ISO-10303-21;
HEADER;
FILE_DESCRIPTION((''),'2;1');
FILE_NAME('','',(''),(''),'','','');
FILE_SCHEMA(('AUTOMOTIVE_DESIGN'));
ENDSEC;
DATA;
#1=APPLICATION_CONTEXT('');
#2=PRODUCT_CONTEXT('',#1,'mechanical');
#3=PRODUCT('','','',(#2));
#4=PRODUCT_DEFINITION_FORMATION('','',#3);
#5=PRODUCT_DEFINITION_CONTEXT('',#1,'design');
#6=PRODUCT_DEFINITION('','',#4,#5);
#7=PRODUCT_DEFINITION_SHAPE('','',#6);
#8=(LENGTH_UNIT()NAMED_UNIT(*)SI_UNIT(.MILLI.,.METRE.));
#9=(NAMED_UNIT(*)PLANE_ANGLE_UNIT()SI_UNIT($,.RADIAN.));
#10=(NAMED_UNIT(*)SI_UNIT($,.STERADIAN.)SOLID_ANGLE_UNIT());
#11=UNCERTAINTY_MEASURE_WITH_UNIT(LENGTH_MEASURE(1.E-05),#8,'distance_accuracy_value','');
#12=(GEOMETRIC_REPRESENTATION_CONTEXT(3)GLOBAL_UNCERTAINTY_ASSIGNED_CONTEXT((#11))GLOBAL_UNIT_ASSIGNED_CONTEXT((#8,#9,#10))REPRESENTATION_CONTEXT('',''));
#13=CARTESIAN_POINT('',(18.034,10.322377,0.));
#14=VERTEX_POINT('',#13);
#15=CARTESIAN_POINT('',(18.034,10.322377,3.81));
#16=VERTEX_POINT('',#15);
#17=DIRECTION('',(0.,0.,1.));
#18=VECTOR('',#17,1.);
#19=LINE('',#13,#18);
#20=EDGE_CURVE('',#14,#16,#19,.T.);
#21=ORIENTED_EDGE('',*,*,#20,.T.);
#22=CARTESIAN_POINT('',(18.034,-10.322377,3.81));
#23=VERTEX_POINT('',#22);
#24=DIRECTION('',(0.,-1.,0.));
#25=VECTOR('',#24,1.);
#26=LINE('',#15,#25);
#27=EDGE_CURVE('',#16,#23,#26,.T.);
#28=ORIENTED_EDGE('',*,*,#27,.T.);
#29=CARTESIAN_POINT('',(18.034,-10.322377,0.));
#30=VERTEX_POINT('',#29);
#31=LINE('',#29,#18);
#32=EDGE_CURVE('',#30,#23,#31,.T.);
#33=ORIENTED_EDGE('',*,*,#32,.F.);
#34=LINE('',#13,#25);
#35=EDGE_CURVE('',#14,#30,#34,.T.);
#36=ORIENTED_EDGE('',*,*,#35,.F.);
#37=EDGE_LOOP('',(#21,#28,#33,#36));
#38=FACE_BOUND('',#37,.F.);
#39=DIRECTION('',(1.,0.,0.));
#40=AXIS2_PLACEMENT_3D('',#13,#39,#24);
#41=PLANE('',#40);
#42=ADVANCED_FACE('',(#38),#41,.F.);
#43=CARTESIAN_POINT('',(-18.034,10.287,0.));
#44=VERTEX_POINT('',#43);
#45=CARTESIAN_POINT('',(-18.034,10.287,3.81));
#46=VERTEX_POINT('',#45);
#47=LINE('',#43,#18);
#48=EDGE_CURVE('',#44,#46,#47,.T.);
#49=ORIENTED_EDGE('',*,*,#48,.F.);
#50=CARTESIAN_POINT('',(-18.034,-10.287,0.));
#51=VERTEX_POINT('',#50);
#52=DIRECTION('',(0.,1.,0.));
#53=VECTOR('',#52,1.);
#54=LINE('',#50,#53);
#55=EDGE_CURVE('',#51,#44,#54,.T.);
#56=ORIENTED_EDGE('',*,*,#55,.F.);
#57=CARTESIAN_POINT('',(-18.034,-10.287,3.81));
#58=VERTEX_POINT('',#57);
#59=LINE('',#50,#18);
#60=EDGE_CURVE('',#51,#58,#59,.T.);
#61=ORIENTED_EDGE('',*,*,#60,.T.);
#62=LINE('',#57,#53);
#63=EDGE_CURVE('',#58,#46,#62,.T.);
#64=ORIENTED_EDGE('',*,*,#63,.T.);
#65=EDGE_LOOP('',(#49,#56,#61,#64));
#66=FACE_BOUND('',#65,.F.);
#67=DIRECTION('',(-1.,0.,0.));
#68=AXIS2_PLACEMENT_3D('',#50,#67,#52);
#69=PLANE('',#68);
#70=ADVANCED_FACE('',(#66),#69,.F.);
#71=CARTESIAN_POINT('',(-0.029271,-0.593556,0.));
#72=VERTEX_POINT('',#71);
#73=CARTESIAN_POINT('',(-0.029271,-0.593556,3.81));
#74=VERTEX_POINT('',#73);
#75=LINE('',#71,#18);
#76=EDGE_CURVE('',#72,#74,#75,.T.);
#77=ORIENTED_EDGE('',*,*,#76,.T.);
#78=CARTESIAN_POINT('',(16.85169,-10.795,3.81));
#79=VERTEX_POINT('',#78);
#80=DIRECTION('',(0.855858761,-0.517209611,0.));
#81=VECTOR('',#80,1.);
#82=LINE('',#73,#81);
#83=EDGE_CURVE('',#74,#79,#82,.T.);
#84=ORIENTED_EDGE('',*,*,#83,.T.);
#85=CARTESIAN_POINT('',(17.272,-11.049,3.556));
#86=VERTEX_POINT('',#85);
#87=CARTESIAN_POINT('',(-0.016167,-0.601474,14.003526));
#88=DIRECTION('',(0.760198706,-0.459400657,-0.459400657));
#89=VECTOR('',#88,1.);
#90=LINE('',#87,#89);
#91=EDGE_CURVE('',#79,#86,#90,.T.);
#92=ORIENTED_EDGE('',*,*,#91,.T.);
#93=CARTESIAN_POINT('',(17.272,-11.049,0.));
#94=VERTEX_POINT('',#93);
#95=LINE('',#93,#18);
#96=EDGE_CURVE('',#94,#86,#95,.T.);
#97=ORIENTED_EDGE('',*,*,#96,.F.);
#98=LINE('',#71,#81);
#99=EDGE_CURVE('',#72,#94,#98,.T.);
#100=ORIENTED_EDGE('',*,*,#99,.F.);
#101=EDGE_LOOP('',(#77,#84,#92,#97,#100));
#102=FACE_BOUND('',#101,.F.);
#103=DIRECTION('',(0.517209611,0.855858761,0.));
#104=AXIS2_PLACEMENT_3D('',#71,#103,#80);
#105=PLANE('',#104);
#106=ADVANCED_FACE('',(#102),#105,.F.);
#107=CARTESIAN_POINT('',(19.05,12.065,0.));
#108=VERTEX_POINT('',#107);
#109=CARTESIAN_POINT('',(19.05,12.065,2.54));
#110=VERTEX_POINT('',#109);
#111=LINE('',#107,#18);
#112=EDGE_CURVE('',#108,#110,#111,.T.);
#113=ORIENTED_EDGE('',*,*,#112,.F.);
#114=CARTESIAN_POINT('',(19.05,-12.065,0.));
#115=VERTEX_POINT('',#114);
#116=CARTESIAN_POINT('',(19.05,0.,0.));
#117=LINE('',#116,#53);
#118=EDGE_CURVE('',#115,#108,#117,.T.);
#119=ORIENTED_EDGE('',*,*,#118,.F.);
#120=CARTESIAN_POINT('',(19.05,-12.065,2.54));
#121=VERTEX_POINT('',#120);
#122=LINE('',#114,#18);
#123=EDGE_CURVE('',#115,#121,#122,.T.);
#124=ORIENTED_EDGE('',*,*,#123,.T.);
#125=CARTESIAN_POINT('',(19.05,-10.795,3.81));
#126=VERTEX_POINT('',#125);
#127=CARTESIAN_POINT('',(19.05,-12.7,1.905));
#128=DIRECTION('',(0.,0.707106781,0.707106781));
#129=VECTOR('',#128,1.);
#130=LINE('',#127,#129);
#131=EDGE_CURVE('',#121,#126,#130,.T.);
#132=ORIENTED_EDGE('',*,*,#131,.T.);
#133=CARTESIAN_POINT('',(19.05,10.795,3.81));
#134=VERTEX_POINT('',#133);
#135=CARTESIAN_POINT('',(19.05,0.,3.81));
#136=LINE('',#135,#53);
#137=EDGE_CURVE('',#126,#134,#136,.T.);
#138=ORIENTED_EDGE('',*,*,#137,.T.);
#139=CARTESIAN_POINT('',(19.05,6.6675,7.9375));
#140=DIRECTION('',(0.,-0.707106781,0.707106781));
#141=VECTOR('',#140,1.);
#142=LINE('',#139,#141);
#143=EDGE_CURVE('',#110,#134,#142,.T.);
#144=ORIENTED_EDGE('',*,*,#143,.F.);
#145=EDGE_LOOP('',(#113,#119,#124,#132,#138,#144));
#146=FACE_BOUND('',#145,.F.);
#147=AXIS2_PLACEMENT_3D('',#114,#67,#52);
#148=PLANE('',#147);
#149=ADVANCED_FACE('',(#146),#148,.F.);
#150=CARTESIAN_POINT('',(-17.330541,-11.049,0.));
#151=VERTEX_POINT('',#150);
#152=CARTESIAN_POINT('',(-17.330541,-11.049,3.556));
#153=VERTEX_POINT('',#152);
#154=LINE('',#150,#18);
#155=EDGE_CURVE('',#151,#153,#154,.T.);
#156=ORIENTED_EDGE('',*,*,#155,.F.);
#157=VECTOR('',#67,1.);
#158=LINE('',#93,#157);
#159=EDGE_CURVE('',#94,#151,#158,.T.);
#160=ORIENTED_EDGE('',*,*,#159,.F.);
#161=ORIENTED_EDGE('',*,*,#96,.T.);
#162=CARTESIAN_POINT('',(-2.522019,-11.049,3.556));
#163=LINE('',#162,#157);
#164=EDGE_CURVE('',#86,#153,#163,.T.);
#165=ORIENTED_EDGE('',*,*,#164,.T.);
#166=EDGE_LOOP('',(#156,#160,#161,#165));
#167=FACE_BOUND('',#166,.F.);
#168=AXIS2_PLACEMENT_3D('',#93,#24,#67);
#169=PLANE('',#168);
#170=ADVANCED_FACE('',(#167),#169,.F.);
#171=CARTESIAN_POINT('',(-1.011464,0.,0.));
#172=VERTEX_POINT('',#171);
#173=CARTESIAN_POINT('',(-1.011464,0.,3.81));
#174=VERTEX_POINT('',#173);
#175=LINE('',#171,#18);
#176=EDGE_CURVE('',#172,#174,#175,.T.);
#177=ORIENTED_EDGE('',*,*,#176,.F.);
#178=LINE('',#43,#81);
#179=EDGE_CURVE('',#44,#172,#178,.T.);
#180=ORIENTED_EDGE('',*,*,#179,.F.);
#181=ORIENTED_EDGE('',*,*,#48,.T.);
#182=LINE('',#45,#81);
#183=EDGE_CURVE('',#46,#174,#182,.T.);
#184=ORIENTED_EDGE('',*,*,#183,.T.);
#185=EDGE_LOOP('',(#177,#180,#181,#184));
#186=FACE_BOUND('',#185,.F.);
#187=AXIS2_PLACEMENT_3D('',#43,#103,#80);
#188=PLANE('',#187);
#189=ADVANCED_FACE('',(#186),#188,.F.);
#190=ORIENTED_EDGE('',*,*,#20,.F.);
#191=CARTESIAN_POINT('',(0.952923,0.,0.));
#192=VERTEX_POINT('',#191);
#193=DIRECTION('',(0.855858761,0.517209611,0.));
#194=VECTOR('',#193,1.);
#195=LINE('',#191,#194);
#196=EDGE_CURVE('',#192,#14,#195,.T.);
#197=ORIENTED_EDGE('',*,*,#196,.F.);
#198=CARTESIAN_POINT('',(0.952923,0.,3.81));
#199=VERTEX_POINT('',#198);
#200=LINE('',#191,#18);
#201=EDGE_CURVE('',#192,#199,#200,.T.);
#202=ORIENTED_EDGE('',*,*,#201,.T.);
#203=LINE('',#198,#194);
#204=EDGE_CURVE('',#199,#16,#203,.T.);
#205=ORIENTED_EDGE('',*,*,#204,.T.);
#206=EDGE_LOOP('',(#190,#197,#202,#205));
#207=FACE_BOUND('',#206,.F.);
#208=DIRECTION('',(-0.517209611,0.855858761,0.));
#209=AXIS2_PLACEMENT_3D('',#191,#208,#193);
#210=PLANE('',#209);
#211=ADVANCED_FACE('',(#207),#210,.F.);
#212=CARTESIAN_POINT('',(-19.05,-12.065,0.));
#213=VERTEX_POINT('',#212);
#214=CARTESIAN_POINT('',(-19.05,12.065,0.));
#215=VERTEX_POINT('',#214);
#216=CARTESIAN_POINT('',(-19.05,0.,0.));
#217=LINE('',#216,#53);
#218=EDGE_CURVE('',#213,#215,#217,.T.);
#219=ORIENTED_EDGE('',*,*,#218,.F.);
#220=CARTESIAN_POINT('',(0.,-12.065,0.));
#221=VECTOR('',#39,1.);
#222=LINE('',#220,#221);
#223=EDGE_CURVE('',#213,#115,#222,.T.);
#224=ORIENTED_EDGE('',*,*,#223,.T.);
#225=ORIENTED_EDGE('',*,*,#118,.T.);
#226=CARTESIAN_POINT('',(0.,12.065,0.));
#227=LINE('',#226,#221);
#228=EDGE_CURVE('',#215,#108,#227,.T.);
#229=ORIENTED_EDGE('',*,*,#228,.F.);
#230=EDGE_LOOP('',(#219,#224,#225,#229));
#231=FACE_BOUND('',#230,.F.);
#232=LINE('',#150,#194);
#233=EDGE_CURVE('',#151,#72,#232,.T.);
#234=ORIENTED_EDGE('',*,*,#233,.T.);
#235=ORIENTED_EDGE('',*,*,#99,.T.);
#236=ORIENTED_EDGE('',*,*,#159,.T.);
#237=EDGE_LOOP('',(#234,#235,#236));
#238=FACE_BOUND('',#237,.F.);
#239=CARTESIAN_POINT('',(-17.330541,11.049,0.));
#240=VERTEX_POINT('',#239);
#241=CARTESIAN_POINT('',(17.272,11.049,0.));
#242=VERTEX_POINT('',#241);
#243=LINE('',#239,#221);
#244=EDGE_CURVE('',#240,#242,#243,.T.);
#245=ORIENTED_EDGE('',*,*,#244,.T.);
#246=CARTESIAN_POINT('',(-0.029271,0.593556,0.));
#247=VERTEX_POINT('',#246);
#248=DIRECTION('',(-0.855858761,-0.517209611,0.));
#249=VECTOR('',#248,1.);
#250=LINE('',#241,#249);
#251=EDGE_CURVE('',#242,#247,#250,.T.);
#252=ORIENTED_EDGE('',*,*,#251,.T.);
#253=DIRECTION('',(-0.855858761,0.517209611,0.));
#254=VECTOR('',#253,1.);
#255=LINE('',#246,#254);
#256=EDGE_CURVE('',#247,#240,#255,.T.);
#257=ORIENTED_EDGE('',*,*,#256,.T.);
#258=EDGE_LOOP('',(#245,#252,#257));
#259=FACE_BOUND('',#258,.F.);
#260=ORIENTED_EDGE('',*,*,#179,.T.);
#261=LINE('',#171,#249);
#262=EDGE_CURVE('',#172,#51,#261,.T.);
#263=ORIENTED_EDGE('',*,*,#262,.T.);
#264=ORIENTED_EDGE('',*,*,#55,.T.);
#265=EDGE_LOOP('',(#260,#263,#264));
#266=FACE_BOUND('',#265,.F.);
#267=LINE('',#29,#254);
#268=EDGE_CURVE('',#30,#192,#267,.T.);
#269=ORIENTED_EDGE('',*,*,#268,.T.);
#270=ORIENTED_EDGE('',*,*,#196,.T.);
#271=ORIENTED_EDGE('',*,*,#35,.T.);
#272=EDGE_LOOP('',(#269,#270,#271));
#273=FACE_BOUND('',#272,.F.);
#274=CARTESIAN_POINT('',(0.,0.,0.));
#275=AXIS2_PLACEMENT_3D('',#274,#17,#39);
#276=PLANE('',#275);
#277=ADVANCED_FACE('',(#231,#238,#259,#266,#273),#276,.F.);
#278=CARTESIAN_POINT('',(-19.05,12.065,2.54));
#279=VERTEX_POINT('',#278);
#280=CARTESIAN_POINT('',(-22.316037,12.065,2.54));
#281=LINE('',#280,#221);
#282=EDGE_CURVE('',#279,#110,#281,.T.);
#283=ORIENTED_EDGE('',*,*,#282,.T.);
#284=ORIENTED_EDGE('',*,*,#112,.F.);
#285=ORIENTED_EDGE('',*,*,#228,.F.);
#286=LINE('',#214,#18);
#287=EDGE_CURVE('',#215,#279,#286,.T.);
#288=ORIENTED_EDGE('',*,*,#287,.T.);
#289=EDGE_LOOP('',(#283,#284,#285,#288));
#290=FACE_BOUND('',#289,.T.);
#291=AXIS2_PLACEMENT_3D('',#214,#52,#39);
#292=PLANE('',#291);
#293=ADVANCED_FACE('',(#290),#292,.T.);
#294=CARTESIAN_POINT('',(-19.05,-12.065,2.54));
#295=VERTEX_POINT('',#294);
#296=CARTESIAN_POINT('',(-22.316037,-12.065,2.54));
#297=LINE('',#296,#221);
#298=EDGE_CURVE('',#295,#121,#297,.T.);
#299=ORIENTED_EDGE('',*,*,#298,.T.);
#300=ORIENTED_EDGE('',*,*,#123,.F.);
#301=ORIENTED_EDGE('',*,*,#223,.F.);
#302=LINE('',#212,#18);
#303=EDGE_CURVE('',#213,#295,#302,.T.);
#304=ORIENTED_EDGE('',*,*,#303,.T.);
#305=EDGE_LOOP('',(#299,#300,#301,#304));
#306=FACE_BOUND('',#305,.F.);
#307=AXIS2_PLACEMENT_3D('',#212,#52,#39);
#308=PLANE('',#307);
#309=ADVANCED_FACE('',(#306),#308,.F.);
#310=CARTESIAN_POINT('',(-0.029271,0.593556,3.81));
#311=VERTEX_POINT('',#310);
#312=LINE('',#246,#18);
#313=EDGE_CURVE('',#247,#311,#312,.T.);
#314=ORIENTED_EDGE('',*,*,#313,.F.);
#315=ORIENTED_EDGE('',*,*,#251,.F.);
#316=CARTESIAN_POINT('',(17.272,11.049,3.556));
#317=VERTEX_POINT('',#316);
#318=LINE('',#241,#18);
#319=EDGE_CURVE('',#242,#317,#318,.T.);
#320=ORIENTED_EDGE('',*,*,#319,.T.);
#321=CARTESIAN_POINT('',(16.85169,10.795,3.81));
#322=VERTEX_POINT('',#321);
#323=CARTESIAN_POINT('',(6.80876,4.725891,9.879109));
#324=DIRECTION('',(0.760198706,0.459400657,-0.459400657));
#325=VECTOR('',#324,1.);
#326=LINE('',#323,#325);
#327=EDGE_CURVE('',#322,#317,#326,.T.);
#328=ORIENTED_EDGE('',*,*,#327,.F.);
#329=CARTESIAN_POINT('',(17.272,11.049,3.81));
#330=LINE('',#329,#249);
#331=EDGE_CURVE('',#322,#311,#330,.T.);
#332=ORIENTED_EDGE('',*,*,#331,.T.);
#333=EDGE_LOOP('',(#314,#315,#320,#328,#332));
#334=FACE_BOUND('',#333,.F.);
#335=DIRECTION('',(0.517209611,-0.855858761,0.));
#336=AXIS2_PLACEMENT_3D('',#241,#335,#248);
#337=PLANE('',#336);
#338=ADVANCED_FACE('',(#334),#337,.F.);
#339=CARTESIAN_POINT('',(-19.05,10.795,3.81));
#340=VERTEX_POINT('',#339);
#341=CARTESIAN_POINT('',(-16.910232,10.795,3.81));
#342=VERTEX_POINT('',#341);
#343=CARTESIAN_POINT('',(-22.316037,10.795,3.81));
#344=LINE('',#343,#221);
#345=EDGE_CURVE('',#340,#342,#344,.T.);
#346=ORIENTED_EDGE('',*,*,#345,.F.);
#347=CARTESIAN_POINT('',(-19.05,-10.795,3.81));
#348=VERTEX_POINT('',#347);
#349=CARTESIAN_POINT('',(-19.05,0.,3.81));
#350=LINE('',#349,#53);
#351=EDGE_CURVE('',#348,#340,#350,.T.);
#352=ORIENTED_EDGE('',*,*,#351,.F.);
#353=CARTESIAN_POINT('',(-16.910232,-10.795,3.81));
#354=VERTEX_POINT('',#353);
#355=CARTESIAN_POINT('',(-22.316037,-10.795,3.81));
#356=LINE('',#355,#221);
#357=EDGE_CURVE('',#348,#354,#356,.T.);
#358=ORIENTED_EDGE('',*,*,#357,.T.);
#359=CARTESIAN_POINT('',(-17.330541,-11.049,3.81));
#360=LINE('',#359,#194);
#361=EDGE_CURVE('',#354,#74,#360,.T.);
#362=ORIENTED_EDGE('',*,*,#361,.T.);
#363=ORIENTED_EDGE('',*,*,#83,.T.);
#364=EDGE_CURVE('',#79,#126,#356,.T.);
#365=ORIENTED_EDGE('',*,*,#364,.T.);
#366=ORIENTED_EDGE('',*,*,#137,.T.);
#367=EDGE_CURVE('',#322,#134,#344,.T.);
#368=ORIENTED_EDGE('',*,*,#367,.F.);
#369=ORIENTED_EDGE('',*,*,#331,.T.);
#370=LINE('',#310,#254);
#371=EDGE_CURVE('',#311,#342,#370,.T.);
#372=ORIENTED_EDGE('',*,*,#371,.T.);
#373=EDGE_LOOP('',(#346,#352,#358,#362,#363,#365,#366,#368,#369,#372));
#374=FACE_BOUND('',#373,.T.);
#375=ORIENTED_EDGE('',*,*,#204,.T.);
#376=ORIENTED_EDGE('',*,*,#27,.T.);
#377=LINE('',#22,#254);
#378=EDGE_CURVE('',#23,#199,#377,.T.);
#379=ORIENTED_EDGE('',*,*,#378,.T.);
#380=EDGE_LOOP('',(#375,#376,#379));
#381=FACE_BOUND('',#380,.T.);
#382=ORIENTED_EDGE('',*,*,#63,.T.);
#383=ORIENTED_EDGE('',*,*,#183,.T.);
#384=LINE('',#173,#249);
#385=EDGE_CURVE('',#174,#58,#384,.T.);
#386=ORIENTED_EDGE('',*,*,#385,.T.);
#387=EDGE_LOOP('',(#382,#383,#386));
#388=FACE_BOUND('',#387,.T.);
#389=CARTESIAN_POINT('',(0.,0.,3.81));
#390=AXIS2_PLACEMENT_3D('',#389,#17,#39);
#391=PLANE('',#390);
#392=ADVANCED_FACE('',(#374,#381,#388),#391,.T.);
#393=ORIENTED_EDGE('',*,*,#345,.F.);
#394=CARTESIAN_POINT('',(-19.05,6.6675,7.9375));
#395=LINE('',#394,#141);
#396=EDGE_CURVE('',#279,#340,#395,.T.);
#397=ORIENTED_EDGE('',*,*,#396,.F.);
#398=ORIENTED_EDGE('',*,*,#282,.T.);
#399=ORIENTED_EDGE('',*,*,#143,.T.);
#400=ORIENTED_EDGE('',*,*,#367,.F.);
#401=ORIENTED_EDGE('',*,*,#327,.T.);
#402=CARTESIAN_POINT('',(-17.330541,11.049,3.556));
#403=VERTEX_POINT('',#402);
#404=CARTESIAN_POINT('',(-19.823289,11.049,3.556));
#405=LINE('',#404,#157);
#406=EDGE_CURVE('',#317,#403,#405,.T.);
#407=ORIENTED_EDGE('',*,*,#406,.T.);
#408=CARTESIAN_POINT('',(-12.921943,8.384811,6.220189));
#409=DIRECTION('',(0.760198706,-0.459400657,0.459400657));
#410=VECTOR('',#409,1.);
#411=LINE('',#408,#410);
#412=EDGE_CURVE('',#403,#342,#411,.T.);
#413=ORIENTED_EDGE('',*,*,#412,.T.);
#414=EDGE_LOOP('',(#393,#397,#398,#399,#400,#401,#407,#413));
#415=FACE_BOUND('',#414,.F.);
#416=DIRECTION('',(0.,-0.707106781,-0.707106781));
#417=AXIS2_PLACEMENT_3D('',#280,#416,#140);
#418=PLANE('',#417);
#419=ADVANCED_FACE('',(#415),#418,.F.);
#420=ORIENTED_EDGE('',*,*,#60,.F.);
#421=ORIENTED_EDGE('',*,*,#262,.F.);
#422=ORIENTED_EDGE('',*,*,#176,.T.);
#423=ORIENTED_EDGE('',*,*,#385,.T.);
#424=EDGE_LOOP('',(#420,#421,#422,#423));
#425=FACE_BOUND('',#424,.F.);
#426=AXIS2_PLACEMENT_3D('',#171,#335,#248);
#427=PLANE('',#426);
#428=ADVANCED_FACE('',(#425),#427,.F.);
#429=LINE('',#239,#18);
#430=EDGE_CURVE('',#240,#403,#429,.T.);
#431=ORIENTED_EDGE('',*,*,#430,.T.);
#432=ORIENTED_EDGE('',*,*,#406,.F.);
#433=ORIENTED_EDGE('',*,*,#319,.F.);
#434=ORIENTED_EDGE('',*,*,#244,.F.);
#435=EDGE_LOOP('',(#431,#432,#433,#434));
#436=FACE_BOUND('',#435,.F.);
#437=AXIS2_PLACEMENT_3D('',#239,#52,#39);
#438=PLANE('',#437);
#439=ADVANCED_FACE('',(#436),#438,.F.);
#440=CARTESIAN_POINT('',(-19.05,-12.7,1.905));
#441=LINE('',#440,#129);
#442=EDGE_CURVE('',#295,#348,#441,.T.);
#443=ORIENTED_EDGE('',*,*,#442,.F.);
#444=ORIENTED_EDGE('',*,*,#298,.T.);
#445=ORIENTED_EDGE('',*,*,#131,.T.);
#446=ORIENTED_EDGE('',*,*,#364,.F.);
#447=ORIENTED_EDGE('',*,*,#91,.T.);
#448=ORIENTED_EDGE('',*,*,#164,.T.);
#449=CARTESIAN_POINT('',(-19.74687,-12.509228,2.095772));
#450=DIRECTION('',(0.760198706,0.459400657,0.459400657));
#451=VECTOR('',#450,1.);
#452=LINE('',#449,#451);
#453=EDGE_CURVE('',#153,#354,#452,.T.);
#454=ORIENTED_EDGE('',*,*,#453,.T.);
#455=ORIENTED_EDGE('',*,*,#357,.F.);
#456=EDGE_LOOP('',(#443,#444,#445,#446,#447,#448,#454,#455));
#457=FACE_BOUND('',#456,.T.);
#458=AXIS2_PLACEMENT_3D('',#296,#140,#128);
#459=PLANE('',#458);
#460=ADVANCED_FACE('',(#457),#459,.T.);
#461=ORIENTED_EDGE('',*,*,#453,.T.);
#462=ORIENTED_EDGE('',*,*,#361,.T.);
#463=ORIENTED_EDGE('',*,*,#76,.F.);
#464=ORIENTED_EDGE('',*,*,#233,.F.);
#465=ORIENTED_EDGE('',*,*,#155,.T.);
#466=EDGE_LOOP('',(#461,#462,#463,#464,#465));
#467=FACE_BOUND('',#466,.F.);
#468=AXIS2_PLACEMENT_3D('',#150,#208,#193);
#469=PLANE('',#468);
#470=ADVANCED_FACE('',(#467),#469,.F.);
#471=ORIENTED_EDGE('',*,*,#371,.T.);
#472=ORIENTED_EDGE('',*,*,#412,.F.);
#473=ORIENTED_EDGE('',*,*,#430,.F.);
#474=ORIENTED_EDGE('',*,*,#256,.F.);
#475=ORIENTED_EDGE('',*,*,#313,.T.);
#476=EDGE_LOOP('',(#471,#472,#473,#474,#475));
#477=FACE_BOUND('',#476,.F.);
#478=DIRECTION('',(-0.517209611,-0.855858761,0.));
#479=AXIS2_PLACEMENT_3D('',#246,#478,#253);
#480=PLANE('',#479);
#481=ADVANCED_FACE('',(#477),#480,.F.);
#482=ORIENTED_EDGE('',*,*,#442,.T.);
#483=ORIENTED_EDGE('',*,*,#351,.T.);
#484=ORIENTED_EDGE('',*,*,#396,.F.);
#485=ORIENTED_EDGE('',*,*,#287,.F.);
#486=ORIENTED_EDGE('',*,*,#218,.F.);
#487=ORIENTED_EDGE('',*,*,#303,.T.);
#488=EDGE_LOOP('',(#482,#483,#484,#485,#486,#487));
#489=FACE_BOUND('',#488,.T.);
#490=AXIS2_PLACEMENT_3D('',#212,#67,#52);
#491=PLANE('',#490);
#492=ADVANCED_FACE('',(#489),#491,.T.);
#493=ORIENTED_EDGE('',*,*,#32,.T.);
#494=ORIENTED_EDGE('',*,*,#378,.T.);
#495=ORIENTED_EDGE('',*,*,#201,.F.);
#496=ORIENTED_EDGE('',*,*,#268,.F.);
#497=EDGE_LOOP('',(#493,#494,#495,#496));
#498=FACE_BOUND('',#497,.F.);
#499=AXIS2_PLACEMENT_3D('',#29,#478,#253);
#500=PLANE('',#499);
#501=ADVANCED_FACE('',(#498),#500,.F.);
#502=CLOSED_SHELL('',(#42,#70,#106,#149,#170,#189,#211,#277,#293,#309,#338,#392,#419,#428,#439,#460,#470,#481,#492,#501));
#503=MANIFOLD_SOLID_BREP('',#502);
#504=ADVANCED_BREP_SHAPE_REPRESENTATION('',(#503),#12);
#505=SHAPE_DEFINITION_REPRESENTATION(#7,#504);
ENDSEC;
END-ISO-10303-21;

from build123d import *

# Parameters (mm, degrees)
F0_W        = 38.1
F0_H        = 24.13
F1_DEPTH    = 3.81
F2_T1_DEPTH = 44.6320747894


# Not quite as in the source:
# - a fillet or chamfer that OpenCascade refuses, or shapes differently, is made with other operations: its cross-section is extruded or revolved along the edge and cut away or added


with BuildPart() as f1:
    # F0 (on Top) → F1 (new body)
    with BuildSketch(Plane.XY):
        Rectangle(F0_W, F0_H)
        Polygon((-0.029270627, -0.5935558801), (17.272, -11.049), (-17.330541254, -11.049), align=None, mode=Mode.SUBTRACT)
        Polygon((-18.034, -10.287), (-18.034, 10.287), (-1.0114642857, 0), align=None, mode=Mode.SUBTRACT)
        Polygon((-17.330541254, 11.049), (17.272, 11.049), (-0.029270627, 0.5935558801), align=None, mode=Mode.SUBTRACT)
        Polygon((0.9529230317, 0), (18.034, 10.3223774485), (18.034, -10.3223774485), align=None, mode=Mode.SUBTRACT)
    extrude(amount=F1_DEPTH)

    # F2: chamfer of 1.27 on 2 edges, made by hand

    # F2_s2 → F2_t1 (cut)
    with BuildSketch(Plane.YZ.offset(-22.3160373947)):
        Polygon((-12.065, 2.54), (-10.795, 3.81), (-12.065, 3.81), align=None)
        Polygon((12.065, 2.54), (10.795, 3.81), (12.065, 3.81), align=None)
    extrude(amount=F2_T1_DEPTH, mode=Mode.SUBTRACT)


solid = f1.part
